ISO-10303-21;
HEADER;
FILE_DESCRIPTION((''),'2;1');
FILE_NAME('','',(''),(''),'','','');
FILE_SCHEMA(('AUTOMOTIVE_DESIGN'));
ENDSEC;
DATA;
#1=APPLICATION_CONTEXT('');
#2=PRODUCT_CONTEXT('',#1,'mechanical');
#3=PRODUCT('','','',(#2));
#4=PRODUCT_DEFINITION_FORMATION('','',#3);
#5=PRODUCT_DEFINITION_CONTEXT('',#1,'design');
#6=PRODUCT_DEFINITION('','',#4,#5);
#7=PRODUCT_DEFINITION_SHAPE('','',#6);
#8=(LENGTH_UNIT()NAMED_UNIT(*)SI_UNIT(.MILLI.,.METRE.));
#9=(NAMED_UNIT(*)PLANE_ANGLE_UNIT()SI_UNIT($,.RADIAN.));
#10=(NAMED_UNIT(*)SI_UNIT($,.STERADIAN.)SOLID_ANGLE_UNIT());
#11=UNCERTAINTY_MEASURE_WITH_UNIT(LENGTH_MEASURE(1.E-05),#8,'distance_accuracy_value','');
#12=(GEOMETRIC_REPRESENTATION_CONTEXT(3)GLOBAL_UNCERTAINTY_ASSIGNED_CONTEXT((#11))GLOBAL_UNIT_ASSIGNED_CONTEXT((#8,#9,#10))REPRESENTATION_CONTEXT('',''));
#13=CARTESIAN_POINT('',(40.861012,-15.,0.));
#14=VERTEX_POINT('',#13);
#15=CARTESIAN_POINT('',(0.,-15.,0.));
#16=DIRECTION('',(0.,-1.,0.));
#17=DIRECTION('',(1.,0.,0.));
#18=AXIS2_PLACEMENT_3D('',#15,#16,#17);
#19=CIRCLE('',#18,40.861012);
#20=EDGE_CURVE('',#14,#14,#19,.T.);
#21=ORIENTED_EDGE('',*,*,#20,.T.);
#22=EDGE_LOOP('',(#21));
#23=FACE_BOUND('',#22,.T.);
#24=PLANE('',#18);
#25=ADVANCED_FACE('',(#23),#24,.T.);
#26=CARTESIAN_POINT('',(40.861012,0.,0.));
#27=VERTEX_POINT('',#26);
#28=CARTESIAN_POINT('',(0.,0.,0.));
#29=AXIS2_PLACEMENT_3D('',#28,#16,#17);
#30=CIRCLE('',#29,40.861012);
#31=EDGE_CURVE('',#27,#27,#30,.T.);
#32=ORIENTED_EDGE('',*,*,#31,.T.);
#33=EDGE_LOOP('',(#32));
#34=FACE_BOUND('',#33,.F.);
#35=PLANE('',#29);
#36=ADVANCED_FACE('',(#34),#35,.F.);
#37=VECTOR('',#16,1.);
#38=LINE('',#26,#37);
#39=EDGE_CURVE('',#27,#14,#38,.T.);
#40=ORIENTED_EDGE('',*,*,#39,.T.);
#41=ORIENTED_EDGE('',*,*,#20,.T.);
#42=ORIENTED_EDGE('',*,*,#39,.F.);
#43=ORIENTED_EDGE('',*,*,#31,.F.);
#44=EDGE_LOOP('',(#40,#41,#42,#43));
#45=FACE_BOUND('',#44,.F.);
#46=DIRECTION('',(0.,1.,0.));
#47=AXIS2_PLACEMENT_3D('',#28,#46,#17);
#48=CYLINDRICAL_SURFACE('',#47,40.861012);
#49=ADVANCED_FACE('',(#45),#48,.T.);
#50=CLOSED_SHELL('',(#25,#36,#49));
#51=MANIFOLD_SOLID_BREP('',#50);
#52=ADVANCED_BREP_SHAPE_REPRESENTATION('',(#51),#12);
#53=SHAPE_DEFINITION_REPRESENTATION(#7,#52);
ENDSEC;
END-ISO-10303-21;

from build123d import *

# Parameters (mm, degrees)
F0_R     = 40.861011546
F1_DEPTH = 15


# Not quite as in the source:
# - a feature of the source that left no trace in its solid (it failed there, or was rolled back) is left out


with BuildPart() as f1:
    # F0 (on Front) → F1 (new body)
    with BuildSketch(Plane.XZ):
        Circle(F0_R)
    extrude(amount=F1_DEPTH)


solid = f1.part
